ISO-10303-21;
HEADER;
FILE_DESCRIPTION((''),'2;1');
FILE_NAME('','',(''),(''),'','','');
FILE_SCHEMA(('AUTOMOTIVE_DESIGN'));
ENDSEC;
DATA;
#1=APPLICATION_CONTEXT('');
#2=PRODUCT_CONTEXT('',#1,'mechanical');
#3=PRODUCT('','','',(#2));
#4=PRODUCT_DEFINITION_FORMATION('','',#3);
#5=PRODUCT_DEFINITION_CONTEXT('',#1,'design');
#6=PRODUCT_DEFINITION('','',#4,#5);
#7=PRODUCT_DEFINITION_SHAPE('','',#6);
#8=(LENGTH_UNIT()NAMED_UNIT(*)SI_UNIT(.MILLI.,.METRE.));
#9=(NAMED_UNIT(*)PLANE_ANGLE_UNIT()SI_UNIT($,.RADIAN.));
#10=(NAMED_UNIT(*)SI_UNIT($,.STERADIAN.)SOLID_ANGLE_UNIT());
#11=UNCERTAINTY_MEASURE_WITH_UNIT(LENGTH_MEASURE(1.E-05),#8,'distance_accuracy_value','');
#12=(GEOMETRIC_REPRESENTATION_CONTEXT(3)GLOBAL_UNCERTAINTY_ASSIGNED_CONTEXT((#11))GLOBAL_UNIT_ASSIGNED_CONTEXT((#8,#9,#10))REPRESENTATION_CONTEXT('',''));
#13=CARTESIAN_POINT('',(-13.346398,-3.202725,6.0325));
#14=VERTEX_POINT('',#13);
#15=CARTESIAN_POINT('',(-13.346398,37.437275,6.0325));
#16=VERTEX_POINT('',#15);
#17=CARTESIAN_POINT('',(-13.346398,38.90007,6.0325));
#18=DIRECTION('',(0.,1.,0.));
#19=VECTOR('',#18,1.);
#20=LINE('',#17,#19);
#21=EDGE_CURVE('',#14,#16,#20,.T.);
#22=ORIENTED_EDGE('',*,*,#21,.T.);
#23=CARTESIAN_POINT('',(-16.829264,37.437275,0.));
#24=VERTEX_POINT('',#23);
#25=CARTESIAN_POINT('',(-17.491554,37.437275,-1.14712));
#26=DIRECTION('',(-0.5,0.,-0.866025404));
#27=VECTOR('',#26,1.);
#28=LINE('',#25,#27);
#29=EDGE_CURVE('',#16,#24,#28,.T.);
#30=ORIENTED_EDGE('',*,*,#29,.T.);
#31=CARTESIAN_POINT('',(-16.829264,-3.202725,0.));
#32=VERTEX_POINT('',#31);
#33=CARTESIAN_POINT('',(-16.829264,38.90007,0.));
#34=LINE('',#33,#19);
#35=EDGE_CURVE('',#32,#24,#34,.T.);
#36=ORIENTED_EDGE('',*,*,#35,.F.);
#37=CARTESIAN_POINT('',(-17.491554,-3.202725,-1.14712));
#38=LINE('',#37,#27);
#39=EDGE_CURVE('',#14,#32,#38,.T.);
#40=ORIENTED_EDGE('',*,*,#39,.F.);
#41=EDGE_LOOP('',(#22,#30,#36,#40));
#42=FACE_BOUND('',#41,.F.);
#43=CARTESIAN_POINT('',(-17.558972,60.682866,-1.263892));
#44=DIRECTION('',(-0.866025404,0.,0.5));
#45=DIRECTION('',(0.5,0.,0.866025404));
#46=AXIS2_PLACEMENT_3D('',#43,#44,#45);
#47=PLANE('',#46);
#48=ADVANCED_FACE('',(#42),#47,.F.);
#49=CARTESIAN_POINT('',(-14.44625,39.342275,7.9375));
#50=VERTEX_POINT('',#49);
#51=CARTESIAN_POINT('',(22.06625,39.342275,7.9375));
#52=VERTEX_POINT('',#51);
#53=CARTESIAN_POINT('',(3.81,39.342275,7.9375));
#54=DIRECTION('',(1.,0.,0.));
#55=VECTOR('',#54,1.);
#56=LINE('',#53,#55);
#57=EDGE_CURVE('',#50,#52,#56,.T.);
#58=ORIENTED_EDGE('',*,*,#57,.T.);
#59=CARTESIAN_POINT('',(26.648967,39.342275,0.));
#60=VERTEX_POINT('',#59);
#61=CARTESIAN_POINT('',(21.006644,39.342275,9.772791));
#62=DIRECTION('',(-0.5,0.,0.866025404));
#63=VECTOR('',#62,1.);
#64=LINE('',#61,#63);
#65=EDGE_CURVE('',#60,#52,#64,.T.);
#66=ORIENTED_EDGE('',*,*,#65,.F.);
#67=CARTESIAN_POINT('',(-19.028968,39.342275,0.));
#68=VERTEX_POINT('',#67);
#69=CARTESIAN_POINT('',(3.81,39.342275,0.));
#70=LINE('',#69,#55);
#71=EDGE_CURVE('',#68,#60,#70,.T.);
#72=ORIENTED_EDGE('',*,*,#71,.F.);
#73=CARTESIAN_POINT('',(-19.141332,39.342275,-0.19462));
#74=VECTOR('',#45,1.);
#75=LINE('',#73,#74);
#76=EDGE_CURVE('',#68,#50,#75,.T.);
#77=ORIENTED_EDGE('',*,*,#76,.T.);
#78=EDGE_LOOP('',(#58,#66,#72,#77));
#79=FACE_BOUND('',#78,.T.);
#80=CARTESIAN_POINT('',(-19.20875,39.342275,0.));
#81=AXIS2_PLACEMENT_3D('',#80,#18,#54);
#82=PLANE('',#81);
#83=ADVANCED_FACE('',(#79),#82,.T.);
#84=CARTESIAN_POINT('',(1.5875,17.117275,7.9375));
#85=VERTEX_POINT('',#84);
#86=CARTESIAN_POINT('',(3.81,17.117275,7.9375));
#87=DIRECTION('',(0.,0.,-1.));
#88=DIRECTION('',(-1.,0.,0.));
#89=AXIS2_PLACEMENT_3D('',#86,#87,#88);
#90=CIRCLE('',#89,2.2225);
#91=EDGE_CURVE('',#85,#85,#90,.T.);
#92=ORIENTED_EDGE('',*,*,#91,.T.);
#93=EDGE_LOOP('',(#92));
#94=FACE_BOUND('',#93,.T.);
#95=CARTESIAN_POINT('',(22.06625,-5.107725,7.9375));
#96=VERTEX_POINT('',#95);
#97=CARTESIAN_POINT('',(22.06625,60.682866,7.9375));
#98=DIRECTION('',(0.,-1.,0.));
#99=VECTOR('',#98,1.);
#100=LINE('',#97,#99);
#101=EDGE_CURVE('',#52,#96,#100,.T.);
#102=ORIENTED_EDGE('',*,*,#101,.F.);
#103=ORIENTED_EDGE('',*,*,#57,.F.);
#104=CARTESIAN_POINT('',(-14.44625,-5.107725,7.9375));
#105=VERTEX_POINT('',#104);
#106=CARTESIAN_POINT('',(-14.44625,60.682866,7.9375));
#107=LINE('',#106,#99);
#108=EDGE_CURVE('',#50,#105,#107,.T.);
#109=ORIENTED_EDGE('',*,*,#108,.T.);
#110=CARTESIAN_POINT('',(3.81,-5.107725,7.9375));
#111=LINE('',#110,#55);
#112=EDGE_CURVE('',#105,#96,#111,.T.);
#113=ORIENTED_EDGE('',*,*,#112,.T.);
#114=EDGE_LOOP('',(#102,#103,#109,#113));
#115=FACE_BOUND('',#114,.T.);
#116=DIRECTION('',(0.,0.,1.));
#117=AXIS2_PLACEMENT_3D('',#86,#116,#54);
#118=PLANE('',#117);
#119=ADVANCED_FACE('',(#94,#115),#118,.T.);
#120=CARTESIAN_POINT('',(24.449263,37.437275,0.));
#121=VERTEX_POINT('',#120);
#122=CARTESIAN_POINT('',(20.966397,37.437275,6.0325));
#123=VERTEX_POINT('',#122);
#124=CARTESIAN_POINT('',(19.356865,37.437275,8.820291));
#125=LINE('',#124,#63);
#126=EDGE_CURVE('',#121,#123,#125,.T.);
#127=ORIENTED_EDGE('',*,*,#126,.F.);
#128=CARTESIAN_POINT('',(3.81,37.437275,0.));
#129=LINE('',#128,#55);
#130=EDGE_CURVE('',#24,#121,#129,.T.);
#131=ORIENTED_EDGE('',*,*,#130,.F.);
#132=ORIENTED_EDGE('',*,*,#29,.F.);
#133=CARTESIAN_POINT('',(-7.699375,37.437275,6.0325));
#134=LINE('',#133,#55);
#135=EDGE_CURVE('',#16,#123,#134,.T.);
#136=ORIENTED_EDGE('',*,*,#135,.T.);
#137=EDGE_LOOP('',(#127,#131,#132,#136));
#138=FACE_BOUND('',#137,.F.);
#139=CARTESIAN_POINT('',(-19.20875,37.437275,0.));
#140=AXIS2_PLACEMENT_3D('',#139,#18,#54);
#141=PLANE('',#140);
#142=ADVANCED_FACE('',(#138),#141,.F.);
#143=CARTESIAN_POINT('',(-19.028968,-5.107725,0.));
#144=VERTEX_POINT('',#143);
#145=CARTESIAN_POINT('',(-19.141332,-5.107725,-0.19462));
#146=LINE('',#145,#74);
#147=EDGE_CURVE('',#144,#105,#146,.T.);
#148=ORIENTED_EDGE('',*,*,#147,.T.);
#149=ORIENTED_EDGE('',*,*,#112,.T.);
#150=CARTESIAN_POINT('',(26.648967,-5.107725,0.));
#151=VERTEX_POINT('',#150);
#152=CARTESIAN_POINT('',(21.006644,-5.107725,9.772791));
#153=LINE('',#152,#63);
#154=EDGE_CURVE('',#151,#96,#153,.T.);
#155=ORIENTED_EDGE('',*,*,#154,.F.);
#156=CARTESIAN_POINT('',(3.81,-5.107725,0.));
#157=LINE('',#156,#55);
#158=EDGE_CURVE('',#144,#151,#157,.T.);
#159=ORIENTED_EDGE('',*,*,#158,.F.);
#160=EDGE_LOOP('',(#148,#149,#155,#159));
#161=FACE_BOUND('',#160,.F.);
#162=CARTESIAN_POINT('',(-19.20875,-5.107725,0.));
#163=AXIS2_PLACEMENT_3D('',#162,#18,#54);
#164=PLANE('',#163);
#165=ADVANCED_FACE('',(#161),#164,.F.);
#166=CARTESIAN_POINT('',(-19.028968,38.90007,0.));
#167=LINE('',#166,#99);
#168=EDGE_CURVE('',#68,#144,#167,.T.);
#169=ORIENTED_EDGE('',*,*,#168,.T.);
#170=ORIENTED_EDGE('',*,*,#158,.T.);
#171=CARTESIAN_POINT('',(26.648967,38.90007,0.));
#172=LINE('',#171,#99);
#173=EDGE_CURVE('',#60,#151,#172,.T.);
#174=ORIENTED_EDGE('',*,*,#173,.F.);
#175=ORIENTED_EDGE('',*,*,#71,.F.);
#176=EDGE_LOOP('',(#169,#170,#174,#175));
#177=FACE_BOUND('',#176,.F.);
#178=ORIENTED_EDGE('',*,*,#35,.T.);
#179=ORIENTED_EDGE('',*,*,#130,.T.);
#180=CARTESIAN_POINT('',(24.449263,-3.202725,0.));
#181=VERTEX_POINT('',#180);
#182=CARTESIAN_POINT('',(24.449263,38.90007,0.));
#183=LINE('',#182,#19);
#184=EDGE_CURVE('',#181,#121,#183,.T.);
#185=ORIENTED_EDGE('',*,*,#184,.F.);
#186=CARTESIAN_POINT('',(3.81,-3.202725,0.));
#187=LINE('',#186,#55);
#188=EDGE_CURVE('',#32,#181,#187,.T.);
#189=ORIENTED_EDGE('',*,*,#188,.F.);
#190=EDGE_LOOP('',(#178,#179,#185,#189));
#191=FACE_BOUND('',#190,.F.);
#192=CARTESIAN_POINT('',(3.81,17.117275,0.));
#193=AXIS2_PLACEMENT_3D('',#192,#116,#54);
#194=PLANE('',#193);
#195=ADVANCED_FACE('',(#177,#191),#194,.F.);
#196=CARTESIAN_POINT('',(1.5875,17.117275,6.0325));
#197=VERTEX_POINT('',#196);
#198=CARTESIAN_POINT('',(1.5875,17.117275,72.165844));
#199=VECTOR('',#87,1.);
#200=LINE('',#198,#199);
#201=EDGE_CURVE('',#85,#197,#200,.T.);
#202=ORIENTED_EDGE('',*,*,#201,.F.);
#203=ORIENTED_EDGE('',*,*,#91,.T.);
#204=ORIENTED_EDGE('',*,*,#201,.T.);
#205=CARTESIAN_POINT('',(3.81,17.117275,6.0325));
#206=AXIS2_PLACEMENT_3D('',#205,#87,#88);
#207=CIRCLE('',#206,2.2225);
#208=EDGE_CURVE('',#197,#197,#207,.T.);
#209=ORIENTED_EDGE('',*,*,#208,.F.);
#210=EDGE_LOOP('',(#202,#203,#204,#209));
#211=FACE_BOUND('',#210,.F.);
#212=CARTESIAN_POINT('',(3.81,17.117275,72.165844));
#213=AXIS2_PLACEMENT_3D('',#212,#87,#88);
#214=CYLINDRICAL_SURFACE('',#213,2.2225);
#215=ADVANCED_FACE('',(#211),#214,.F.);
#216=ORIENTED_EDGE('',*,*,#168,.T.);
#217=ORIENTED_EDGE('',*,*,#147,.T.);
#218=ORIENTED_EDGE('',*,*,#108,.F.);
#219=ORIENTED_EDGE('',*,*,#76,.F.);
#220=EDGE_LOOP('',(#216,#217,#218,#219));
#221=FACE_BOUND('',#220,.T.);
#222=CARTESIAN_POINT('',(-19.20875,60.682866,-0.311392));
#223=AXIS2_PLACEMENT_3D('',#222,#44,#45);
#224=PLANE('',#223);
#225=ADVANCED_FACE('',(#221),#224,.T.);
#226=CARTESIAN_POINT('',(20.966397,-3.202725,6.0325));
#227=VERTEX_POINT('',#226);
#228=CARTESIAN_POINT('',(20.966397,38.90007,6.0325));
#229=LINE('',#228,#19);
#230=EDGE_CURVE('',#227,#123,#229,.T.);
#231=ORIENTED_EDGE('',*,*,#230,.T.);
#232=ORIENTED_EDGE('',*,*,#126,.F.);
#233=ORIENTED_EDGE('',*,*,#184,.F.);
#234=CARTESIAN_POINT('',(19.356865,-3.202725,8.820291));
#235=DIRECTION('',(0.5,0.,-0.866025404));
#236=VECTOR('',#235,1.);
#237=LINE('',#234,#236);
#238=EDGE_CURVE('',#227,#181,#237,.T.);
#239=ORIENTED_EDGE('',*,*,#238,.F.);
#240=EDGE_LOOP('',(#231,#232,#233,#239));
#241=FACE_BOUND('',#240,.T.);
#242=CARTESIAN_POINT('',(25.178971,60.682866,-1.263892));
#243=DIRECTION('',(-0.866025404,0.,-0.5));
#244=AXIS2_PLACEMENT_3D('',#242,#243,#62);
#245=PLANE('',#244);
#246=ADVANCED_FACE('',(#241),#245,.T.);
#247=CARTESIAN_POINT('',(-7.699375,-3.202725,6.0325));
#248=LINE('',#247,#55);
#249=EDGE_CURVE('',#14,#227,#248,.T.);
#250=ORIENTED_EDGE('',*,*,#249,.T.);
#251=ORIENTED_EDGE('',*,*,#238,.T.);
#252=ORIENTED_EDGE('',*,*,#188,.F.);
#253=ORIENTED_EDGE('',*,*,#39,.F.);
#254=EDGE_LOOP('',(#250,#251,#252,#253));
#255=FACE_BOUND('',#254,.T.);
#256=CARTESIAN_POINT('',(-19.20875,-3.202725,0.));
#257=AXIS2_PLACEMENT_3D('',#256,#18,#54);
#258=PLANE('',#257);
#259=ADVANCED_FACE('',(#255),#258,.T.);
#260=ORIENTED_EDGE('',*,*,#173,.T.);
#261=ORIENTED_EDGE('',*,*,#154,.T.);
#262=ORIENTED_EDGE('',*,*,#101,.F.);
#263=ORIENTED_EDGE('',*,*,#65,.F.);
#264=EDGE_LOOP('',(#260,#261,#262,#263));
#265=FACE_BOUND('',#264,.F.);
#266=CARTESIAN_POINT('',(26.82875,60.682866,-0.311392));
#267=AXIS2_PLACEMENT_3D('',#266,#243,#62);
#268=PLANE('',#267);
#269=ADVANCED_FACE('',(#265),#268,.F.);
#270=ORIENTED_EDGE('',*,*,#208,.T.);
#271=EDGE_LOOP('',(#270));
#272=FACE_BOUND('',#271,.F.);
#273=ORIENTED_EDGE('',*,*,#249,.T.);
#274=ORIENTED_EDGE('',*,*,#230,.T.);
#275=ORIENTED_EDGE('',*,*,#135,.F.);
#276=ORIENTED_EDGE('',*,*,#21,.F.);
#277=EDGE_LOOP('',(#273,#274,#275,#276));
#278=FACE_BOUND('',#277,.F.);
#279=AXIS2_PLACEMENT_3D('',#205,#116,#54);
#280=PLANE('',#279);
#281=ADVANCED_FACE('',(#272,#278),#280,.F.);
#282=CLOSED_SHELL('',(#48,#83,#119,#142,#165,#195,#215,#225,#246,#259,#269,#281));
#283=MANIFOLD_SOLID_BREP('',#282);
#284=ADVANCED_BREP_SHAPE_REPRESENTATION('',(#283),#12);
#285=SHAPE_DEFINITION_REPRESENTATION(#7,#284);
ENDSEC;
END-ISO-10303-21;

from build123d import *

# Parameters (mm, degrees)
F0_W        = 46.0375
F0_H        = 44.45
F1_DEPTH    = 7.9375
F2_T1_DEPTH = 87.1311818198
F3_T        = -1.905
F5_D        = 4.445


# Not quite as in the source:
# - a fillet or chamfer that OpenCascade refuses, or shapes differently, is made with other operations: its cross-section is extruded or revolved along the edge and cut away or added


with BuildPart() as f1:
    # F0 (on Top) → F1 (new body)
    with BuildSketch(Plane.XY):
        with Locations((3.8099996746, 17.1172746531)):
            Rectangle(F0_W, F0_H)
    extrude(amount=F1_DEPTH)

    # F2: chamfer of 4.7625 x 8.248891971 on 2 edges, made by hand

    # F2_s2 → F2_t1 (cut)
    with BuildSketch(Plane.XZ.offset(-60.682865563)):
        Polygon((-19.2087503254, -0.311391971), (-14.4462503254, 7.9375), (-19.2087503254, 7.9375), align=None)
        Polygon((26.8287496746, -0.311391971), (22.0662496746, 7.9375), (26.8287496746, 7.9375), align=None)
    extrude(amount=F2_T1_DEPTH, mode=Mode.SUBTRACT)

    # F3
    f3_openings = [f1.faces().sort_by_distance(p)[0] for p in [
        (3.81, 17.117275, 0),
    ]]
    offset(amount=F3_T, openings=f3_openings)

    # F5 (through all)
    with Locations(Plane.XY.offset(7.9375)):
        with Locations((3.8099996746, 17.1172746531)):
            Hole(F5_D / 2)


solid = f1.part
